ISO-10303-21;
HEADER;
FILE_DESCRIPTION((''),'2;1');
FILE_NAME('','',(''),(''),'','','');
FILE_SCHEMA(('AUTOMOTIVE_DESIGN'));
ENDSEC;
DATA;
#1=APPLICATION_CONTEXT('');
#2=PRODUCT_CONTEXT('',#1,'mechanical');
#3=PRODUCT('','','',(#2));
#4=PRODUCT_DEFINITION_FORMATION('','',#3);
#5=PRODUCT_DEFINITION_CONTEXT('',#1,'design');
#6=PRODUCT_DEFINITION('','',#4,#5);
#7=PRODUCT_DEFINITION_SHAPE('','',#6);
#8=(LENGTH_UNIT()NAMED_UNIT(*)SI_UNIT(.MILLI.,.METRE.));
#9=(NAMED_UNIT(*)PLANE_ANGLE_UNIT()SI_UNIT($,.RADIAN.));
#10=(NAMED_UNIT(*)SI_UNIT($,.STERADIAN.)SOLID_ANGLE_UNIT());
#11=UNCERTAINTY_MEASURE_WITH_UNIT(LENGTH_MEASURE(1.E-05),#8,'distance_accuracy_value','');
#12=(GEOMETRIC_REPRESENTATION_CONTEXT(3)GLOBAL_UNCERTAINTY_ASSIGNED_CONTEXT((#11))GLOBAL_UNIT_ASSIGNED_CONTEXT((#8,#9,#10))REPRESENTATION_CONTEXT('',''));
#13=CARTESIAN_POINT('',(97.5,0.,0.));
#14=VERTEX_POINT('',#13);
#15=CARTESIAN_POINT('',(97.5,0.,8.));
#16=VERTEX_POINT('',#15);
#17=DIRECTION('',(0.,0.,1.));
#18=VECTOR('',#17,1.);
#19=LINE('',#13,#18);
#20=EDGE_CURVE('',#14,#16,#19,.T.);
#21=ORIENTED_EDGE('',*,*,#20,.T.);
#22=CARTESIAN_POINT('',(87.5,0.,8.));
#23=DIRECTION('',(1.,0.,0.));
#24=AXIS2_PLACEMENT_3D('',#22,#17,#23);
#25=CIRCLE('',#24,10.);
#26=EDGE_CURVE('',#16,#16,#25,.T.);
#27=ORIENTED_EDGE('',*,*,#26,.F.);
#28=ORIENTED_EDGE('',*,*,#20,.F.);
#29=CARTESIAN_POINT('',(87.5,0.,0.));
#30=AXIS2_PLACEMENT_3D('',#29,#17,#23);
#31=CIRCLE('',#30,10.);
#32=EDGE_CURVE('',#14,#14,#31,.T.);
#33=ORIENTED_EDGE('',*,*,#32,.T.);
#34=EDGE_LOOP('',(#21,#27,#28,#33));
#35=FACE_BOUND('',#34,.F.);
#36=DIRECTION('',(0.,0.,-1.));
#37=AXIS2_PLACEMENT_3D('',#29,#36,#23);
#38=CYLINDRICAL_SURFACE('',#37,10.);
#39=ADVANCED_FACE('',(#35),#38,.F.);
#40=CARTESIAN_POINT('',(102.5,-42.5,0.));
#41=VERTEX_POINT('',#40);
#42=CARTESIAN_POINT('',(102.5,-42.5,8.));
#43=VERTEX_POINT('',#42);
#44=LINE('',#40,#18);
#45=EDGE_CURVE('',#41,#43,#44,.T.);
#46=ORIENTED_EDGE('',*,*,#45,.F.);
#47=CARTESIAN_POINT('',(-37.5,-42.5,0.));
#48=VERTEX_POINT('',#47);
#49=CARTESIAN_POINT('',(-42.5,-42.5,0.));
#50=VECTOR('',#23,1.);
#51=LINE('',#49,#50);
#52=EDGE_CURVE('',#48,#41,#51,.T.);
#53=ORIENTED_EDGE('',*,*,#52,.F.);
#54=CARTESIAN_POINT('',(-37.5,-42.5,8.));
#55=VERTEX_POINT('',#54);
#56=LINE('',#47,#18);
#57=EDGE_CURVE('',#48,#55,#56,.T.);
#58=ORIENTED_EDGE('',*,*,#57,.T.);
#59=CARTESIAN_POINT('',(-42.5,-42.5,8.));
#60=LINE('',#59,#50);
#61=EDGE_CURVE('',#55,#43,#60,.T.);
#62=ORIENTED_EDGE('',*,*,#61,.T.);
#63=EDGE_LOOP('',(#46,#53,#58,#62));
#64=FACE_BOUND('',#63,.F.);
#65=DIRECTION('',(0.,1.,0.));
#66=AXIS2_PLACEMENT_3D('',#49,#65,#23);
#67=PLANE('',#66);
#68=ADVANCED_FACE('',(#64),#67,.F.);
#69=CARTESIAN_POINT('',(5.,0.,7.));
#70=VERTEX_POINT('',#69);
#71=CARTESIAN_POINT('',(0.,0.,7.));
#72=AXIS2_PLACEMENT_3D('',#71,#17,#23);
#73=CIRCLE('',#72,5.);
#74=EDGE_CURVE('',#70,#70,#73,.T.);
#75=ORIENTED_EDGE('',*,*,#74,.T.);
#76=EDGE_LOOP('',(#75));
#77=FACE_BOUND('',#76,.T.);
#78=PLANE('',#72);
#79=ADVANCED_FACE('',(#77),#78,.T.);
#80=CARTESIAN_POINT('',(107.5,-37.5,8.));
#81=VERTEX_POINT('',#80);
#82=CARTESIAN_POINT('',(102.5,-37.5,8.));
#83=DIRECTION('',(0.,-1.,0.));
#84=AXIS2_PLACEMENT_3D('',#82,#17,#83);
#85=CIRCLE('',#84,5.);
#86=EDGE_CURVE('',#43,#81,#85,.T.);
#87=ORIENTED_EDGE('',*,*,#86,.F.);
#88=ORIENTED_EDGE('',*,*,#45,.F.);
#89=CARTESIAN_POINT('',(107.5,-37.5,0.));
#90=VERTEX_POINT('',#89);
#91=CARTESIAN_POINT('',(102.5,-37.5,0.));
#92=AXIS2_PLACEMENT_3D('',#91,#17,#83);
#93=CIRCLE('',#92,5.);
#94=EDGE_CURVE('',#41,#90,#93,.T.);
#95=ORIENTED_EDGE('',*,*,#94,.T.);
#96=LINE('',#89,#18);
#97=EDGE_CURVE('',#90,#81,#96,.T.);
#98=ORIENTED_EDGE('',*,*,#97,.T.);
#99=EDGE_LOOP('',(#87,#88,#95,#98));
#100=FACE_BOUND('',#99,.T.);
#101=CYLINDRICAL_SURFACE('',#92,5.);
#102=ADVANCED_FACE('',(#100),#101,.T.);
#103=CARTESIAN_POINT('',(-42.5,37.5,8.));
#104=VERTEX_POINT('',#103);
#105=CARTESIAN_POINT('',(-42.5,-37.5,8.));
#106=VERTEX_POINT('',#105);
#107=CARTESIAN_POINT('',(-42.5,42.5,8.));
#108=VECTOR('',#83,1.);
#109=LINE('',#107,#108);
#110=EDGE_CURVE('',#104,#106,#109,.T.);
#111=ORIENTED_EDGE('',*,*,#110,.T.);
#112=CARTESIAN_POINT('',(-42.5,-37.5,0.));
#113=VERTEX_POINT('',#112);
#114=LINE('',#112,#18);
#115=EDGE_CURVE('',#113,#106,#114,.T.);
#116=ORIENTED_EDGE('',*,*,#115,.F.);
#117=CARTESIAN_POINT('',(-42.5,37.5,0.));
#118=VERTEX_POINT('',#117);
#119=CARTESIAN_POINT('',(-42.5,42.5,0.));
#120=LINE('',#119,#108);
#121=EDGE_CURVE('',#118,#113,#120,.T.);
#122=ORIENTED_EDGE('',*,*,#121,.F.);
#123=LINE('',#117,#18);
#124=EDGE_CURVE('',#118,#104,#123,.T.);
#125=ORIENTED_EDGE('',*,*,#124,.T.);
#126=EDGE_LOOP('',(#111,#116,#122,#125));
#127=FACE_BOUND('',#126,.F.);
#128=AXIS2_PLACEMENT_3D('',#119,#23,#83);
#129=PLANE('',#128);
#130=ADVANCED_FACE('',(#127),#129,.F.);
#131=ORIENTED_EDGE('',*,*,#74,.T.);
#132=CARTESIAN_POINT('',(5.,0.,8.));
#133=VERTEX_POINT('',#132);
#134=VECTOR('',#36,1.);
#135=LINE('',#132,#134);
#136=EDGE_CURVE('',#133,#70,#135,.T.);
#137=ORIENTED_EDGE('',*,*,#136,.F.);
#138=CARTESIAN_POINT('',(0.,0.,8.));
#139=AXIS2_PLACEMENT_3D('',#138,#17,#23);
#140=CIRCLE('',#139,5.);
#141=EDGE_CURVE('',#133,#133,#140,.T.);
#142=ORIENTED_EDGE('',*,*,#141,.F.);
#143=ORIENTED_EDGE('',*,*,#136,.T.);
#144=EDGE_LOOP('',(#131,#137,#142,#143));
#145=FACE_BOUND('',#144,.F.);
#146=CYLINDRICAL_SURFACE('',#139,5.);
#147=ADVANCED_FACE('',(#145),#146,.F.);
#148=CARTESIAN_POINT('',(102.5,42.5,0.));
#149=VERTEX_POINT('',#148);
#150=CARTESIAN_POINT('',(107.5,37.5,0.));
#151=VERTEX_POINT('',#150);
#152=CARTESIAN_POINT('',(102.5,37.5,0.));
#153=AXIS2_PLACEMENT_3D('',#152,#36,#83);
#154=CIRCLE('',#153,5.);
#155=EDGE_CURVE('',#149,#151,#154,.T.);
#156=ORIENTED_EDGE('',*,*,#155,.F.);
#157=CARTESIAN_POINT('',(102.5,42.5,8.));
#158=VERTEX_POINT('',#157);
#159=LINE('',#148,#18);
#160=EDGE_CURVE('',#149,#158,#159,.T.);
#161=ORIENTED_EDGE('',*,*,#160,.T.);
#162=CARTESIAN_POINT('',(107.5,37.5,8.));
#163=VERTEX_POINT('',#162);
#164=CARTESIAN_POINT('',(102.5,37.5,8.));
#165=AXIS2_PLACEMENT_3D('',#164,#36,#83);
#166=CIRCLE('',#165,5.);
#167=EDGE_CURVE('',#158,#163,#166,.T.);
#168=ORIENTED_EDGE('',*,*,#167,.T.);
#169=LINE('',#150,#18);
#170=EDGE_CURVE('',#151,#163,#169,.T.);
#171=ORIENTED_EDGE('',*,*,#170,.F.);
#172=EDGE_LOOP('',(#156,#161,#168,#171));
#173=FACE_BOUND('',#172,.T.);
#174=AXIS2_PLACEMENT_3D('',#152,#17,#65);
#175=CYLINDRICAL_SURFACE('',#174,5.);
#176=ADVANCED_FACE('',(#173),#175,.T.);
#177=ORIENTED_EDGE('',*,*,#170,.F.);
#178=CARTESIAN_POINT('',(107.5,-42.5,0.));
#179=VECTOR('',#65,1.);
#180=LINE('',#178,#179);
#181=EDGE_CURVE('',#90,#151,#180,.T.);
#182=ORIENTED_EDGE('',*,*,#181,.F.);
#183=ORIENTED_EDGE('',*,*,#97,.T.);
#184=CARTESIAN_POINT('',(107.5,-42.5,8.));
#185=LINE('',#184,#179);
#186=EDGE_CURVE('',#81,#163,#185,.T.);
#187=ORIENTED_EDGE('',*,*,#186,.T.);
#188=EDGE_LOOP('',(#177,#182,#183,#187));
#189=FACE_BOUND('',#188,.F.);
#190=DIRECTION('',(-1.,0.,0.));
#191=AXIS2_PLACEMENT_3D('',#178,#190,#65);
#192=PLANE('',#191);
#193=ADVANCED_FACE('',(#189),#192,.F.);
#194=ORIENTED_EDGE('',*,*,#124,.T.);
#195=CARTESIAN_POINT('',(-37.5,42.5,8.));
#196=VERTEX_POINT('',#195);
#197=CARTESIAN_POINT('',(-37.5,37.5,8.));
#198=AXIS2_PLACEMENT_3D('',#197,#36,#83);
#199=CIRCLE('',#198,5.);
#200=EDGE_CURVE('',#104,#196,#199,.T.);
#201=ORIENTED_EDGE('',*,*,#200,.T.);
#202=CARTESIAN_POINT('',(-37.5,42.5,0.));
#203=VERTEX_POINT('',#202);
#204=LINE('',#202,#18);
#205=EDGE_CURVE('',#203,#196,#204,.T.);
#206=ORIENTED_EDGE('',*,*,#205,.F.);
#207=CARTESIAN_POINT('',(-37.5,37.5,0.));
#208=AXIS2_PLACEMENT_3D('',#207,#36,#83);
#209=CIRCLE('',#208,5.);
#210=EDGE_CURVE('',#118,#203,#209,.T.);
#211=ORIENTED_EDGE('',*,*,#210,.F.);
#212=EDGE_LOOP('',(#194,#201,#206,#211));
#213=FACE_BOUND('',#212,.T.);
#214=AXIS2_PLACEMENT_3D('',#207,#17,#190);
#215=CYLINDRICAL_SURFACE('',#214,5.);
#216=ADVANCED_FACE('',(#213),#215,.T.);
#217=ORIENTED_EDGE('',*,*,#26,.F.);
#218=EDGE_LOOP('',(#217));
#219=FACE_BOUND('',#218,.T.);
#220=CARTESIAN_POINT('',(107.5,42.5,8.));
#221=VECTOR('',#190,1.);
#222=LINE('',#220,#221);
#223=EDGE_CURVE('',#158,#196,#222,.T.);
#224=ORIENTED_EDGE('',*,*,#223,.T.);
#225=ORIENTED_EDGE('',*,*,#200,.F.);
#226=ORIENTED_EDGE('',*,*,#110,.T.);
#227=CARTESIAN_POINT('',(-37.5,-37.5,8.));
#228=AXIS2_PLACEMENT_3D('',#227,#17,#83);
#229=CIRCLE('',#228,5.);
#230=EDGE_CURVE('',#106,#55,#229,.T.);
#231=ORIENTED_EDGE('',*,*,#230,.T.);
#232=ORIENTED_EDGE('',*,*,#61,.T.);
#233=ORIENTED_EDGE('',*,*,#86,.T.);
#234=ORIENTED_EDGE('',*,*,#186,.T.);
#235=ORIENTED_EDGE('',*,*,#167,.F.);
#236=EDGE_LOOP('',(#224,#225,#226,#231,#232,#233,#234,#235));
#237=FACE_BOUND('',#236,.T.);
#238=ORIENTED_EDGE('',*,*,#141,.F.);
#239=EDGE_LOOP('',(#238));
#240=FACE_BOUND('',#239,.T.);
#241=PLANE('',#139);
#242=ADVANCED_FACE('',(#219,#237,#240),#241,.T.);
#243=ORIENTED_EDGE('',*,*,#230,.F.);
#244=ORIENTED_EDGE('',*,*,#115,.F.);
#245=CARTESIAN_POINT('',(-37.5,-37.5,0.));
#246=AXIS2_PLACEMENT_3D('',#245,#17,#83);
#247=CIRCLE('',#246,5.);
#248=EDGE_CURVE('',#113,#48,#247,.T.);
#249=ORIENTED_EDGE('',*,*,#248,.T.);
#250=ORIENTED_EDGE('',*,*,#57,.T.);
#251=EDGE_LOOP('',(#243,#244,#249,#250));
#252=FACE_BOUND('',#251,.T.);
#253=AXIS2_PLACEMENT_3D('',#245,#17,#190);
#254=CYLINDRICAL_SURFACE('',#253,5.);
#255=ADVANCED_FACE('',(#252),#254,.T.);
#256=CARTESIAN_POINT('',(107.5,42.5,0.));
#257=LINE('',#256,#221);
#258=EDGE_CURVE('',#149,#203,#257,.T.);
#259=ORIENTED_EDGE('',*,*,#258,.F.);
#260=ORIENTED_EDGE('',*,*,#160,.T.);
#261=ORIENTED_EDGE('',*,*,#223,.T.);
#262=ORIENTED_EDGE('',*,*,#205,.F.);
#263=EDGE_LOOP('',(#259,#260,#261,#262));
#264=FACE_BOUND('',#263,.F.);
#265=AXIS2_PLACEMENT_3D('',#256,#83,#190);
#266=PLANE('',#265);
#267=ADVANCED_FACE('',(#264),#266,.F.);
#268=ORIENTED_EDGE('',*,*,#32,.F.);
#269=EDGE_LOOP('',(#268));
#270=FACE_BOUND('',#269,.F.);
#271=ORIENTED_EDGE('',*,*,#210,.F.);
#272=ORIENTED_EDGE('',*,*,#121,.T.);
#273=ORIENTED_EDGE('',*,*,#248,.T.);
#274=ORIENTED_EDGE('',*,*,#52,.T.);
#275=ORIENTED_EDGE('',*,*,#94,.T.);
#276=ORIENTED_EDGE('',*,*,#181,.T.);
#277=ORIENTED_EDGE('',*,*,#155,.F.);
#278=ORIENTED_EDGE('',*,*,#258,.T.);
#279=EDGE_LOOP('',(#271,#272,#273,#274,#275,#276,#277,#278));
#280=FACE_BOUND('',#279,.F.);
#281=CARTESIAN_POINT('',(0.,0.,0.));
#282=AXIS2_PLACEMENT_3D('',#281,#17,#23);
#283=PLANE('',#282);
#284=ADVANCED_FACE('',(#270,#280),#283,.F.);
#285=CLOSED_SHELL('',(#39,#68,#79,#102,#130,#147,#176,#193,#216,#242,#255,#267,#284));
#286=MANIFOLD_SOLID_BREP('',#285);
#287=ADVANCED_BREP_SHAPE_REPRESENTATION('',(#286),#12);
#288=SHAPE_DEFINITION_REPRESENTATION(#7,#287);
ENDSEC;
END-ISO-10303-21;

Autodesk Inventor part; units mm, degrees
ref_plane "YZ Plane" through (0, 0, 0) normal (1, 0, 0) x (0, 1, 0)
ref_plane "XZ Plane" through (0, 0, 0) normal (0, 1, 0) x (-1, 0, 0)
ref_plane "XY Plane" through (0, 0, 0) normal (0, 0, 1) x (1, 0, 0)
sketch "Sketch1" plane through (0, 0, 0) normal (0, 0, 1) x (1, 0, 0)
  line L0 (-42.5, -42.5) -> (107.5, -42.5)
  line L1 (107.5, -42.5) -> (107.5, 42.5)
  line L2 (107.5, 42.5) -> (-42.5, 42.5)
  line L3 (-42.5, 42.5) -> (-42.5, -42.5)
  line L4 (-42.5, -42.5) -> (107.5, 42.5) construction
  line L5 (107.5, -42.5) -> (-42.5, 42.5) construction
  circle A0 centre (87.5, -22.5) radius 10
  circle A1 centre (87.5, 22.5) radius 10
  line L6 (32.5, 0) -> (107.5, 0) construction
  circle A2 centre (87.5, 0) radius 10
  line L7 (40, 40) -> (-40, 40)
  line L8 (-40, 40) -> (-40, -40)
  line L9 (-40, -40) -> (40, -40)
  line L10 (40, -40) -> (40, 40)
  line L11 (40, 40) -> (-40, -40) construction
  line L12 (-40, 40) -> (40, -40) construction
  point P0 (0, 0)
  dimension "d0" = 150
  dimension "d1" = 85
  dimension "d23" = 20
  dimension "d25" = 20
  dimension "d26" = 20
  dimension "d30" = 80
extrude "Plate1" add sketch "Sketch1" along normal blind 8 contours L3 L2 L1 L0 | A0 | A1 | L10 L9 L8 L7
fillet "Corner Round1" radius 5 4 edges at (107.5, -42.5, 4) (-42.5, -42.5, 4) (-42.5, 42.5, 4) (107.5, 42.5, 4)
sketch "Sketch5" plane through (0, 0, 8) normal (0, 0, 1) x (1, 0, 0)
  line L0 (102.5, -42.5) -> (-37.5, -42.5) projected
  line L1 (-42.5, -37.5) -> (-42.5, 37.5) projected
  line L2 (-37.5, 42.5) -> (102.5, 42.5) projected
  circle A0 centre (0, 0) radius 42.5
  circle A1 centre (0, 0) radius 5
  point P0 (0, 0)
  dimension "d27" = 10
extrude "Extrusion2" cut sketch "Sketch5" against normal blind 1 contours A1
equation "\"d26\" = d25"
equation "\"d2\" = Thickness"
equation "\"BendReliefWidth\" = Thickness"
equation "\"BendReliefDepth\" = 0.5 * Thickness"
equation "\"CornerReliefSize\" = 4 * Thickness"
equation "\"MinimumRemnant\" = 2 * Thickness"
equation "\"TransitionRadius\" = BendRadius"
equation "\"JacobiRadiusSize\" = BendRadius"
equation "\"GapSize\" = Thickness"
equation "\"Thickness\" = 8"
equation "\"BendRadius\" = 5"
properties part number "TZS 1283 leg floor plate" material "Steel"
